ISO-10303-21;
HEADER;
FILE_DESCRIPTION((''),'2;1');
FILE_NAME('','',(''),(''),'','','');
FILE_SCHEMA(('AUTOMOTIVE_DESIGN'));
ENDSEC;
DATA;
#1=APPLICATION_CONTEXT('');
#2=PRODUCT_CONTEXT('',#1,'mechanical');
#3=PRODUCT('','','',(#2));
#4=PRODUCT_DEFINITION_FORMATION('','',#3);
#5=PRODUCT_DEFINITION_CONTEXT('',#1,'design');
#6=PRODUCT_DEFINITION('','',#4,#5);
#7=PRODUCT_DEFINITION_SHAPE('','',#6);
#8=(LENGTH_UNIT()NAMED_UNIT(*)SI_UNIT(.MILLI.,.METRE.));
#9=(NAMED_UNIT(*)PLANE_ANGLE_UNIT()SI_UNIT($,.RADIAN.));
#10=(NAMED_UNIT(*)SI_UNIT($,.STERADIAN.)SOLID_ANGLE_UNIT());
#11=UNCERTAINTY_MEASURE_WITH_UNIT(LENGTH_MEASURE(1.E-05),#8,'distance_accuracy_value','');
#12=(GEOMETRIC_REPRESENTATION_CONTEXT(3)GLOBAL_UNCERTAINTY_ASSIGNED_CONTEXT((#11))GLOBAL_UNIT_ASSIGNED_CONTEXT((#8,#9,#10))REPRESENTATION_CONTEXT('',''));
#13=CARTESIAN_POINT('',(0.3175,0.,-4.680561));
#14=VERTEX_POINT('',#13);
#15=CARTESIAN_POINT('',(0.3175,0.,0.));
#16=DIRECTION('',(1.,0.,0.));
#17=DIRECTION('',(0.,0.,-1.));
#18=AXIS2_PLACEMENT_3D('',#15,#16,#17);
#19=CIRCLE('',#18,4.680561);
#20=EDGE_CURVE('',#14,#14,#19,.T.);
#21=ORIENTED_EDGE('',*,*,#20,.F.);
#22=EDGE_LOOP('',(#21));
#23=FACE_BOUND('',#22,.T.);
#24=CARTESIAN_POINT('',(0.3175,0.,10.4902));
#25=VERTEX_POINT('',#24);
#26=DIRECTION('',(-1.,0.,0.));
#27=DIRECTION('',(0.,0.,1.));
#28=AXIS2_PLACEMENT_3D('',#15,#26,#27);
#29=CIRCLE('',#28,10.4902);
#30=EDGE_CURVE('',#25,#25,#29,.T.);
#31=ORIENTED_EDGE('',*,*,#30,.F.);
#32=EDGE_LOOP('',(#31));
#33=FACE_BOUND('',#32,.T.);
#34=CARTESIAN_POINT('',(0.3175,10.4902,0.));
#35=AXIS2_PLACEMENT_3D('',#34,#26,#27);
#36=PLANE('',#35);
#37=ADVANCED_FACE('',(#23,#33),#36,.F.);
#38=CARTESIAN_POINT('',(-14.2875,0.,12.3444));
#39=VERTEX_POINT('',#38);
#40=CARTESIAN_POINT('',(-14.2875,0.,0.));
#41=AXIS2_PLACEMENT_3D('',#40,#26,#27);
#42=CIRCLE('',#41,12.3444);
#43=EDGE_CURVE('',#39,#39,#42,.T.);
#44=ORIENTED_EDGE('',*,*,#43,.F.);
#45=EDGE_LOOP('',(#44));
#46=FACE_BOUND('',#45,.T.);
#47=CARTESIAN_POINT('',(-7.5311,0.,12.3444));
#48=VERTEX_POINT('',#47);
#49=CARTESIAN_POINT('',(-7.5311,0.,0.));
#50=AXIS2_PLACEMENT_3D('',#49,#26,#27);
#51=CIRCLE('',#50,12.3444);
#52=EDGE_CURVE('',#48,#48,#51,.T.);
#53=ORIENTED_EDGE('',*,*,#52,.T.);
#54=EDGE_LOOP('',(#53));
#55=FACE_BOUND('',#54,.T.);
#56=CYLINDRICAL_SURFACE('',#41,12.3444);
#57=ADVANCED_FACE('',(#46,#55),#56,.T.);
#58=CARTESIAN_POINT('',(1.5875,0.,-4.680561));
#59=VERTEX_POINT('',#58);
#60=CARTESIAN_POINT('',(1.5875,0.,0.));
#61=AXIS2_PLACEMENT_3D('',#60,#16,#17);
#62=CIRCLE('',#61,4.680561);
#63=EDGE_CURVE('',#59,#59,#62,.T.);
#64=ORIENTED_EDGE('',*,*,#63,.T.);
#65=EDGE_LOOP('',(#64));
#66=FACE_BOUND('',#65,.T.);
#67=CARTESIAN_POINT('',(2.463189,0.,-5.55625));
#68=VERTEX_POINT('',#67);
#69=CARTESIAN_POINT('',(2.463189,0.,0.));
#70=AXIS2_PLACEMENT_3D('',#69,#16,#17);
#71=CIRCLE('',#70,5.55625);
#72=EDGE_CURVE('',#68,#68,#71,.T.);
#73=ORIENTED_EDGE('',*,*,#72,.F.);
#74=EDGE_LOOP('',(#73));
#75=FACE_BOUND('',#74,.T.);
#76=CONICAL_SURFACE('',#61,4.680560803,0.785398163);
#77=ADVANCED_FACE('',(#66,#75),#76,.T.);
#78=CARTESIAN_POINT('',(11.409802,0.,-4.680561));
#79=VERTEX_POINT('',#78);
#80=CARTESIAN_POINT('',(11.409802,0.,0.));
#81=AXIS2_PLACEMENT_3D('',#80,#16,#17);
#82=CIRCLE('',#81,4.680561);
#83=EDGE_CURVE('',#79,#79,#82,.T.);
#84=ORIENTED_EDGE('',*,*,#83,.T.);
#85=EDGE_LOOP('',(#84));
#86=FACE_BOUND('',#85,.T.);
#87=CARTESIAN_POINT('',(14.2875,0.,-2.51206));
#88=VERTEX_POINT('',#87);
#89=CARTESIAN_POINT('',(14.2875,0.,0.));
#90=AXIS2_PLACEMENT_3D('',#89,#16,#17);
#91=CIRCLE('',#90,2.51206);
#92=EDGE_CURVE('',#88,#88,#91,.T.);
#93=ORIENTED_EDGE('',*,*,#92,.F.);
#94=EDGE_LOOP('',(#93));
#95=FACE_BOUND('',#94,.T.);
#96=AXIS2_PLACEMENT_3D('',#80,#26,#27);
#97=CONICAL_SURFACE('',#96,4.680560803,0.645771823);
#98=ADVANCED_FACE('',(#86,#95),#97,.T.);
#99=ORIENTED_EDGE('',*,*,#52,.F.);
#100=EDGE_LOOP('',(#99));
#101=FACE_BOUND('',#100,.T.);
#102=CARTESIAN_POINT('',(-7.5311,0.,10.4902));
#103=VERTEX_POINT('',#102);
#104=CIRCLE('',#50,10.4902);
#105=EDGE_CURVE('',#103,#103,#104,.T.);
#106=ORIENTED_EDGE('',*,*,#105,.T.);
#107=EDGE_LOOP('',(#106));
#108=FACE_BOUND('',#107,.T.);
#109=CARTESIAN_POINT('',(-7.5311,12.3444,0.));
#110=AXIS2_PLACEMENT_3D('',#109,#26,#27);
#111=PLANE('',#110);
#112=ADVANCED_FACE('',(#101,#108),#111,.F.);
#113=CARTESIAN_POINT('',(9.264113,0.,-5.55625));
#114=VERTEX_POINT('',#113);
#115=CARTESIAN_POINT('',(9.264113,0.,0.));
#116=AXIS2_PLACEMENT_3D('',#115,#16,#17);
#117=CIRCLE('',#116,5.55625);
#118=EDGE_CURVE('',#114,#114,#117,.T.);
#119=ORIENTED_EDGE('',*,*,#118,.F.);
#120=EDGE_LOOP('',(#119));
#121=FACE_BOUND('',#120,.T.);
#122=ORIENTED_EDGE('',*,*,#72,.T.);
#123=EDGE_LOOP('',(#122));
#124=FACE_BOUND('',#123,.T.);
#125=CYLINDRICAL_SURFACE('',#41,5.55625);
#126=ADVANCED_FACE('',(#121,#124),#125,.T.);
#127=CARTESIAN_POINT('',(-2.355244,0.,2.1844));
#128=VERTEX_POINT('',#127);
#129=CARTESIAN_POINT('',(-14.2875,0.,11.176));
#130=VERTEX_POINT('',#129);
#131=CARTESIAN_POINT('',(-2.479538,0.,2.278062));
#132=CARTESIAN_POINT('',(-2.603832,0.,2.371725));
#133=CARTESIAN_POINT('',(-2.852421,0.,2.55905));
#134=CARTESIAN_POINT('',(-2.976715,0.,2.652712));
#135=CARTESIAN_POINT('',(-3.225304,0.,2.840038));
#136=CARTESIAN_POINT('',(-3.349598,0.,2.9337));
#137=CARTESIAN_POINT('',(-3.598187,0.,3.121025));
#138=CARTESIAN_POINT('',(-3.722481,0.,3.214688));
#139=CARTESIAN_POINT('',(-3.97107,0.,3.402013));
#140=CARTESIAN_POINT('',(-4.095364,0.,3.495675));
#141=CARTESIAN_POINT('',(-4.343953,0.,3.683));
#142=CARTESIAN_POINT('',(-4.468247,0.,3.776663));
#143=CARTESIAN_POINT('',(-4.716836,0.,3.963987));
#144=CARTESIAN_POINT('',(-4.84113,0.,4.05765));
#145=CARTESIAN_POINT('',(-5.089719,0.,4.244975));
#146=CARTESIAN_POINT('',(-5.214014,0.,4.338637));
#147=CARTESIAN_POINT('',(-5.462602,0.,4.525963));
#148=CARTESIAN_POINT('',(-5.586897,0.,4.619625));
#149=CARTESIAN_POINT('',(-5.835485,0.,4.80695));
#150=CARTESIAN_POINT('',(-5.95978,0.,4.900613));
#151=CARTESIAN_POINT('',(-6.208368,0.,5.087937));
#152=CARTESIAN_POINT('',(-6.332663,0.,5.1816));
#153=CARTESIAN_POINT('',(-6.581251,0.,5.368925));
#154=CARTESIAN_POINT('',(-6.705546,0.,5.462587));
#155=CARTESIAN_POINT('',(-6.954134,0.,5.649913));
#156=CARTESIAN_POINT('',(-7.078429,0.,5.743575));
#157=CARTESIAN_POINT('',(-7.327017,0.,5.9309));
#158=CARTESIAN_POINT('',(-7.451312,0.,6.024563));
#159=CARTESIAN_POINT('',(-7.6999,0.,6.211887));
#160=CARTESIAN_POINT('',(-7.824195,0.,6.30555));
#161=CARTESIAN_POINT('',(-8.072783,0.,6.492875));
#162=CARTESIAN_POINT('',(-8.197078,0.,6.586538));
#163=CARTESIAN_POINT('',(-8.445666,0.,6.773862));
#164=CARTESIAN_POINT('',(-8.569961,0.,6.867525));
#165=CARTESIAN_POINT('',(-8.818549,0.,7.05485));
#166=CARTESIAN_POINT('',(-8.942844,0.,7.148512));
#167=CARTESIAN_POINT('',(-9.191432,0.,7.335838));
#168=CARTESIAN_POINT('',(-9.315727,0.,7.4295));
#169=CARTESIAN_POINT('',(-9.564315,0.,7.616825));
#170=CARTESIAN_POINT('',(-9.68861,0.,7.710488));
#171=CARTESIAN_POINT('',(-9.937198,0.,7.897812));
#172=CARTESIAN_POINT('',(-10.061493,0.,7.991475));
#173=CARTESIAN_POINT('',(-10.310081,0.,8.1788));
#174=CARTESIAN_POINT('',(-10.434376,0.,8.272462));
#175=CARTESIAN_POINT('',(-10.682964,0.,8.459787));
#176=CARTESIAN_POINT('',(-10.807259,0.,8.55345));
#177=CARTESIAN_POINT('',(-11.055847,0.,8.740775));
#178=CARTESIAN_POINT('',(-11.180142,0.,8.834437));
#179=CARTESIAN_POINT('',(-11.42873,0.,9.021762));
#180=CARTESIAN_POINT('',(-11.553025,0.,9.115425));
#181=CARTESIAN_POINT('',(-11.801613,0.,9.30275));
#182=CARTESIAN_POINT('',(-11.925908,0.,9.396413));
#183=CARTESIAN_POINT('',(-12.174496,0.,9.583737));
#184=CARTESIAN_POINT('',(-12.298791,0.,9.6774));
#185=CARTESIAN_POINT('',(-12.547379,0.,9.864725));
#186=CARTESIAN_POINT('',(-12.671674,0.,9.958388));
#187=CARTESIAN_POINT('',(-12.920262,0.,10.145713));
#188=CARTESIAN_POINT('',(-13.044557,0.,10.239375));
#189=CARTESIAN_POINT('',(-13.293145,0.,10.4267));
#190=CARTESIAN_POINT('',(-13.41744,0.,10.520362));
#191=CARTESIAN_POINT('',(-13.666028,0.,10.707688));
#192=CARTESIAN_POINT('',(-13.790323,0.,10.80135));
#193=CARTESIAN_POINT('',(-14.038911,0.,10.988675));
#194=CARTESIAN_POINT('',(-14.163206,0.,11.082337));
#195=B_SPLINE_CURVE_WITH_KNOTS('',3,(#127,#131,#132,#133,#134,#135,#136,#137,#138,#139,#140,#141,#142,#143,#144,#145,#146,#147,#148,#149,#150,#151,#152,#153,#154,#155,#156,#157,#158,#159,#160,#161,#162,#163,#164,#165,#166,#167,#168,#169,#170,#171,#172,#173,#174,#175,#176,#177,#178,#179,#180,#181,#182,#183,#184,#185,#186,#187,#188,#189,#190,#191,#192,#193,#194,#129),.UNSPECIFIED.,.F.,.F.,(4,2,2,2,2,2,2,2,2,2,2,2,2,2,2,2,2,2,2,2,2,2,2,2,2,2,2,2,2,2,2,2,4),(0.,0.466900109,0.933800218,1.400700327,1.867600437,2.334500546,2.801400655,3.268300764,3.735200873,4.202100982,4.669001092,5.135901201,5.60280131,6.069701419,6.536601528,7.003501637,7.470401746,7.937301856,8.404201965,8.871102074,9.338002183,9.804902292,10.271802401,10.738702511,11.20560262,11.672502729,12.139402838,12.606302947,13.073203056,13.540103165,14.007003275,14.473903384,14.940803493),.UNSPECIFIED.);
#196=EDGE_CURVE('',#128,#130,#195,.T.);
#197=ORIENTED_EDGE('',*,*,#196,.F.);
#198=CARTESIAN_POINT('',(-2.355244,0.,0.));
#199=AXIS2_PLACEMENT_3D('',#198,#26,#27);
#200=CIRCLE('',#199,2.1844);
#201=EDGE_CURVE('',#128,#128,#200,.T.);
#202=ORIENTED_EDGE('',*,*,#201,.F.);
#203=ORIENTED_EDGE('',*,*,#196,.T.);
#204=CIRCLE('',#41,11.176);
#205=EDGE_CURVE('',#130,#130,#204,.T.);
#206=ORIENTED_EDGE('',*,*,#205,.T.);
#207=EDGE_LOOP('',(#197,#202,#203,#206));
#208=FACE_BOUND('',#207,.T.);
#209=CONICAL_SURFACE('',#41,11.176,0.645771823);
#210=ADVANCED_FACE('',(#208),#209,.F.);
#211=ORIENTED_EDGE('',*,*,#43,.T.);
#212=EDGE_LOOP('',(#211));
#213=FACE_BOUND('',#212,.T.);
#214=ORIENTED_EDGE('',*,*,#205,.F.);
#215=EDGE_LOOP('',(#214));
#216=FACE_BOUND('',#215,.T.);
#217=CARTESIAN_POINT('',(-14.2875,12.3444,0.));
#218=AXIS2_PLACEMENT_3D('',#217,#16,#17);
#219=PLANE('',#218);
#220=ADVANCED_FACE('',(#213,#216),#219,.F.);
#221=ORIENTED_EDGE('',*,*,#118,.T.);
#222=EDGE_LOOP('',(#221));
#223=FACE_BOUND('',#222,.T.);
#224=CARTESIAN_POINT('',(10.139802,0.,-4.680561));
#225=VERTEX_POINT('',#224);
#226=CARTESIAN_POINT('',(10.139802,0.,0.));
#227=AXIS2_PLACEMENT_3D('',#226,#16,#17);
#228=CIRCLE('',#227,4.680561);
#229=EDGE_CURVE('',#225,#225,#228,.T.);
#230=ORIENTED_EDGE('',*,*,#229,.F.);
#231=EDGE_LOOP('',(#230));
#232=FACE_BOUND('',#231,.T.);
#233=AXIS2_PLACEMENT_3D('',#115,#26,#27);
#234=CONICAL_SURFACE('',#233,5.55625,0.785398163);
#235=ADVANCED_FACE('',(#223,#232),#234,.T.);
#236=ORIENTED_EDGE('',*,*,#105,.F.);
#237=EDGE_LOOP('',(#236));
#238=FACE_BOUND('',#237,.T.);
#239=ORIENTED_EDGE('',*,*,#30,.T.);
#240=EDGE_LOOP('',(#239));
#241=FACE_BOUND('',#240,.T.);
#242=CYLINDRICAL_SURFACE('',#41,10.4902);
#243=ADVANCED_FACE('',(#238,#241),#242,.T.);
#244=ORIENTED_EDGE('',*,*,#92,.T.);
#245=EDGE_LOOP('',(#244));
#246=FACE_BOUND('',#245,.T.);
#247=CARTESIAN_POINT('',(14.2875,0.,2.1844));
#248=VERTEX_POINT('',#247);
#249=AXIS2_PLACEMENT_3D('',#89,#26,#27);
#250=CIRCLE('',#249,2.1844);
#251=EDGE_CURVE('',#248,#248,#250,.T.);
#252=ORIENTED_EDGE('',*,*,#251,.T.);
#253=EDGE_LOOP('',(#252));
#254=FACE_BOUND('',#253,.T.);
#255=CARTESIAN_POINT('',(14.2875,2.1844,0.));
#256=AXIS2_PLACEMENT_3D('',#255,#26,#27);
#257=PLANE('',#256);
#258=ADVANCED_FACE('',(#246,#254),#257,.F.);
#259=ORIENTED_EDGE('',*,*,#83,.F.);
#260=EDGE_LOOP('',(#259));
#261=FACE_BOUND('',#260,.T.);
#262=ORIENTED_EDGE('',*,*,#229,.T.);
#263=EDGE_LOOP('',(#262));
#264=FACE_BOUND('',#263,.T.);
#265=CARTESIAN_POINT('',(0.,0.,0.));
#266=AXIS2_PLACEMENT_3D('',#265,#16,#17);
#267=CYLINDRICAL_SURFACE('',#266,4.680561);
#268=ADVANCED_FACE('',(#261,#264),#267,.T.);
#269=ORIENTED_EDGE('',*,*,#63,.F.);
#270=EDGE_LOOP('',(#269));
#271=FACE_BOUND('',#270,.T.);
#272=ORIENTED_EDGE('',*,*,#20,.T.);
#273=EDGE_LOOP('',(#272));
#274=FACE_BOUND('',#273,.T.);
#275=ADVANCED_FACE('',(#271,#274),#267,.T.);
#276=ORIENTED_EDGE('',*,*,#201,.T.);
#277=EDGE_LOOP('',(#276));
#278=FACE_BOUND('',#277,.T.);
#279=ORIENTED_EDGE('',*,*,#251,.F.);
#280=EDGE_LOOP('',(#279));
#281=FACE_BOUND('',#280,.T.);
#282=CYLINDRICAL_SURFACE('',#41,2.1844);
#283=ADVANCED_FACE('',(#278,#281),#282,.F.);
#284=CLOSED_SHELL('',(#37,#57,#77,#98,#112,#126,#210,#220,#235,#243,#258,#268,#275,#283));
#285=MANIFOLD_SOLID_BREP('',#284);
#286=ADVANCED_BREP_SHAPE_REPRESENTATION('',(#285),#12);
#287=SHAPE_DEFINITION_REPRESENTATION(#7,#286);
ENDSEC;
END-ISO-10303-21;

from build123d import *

# Parameters (mm, degrees)
CUT_SWEEP1_PITCH = 1.27


with BuildPart() as part:
    # Sketch1 → Revolve1 (revolve)
    with BuildSketch(Plane.XY, mode=Mode.PRIVATE) as revolve1_sk:
        Polygon((-14.2875, 12.3444), (-14.2875, 11.176), (-2.355243782, 2.1844), (14.2875, 2.1844), (14.2875, 2.51206), (14.2875, 5.55625), (10.247723424, 5.55625), (0.3175, 5.55625), (0.3175, 10.4902), (-7.5311, 10.4902), (-7.5311, 12.3444), align=None)
    revolve(revolve1_sk.sketch.rotate(Axis((-14.2875, 0, 0), (1, 0, 0)), 90), axis=Axis((-14.2875, 0, 0), (1, 0, 0)))

    # Cut-Sweep1: the profile of Sketch4 profile screwed along a right-hand helix of 11 turns, 8 arcs to a turn; built about Z, then put on its axis
    cut_sweep1_z = Axis((0, 0, 0), (0, 0, 1))
    cut_sweep1_corners = [(5.55655, 0, 0.000173205), (5.55655, 0, -1.111423205), (4.731360803, 0, -0.635), (4.731360803, 0, -0.47625)]
    with BuildLine(mode=Mode.PRIVATE) as cut_sweep1_profile:
        Line(cut_sweep1_corners[0], cut_sweep1_corners[1])
        Line(cut_sweep1_corners[1], cut_sweep1_corners[2])
        Line(cut_sweep1_corners[2], cut_sweep1_corners[3])
        Line(cut_sweep1_corners[3], cut_sweep1_corners[0])
    cut_sweep1_cap = Face(cut_sweep1_profile.wire())
    cut_sweep1_turn_angles = [0, 22.5, 45, 67.5, 90, 112.5, 135, 157.5, 180, 202.5, 225, 247.5, 270, 292.5, 315, 337.5, 360]
    cut_sweep1_turn_weights = [1, 0.9238795325112867, 1, 0.9238795325112867, 1, 0.9238795325112867, 1, 0.9238795325112867, 1, 0.9238795325112867, 1, 0.9238795325112867, 1, 0.9238795325112867, 1, 0.9238795325112867, 1]
    cut_sweep1_turn_rails = [Edge.make_bspline([Vector(p[0], p[1], 0).rotate(cut_sweep1_z, cut_sweep1_turn_angles[k]) / cut_sweep1_turn_weights[k] + Vector(0, 0, p[2] + CUT_SWEEP1_PITCH * cut_sweep1_turn_angles[k] / 360) for k in range(17)], [0, 0, 0, 1, 1, 2, 2, 3, 3, 4, 4, 5, 5, 6, 6, 7, 7, 8, 8, 8], 2, cut_sweep1_turn_weights) for p in cut_sweep1_corners]
    cut_sweep1_turn_sides = [Face.make_surface_from_curves(cut_sweep1_turn_rails[p[0]], cut_sweep1_turn_rails[p[1]]) for p in [(0, 1), (1, 2), (2, 3), (3, 0)]]
    cut_sweep1_turn = Solid(Shell([*cut_sweep1_turn_sides, cut_sweep1_cap, cut_sweep1_cap.rotate(cut_sweep1_z, 360).moved(Location((0, 0, CUT_SWEEP1_PITCH * 360 / 360)))]))
    cut_sweep1_each = [*[cut_sweep1_turn.moved(Location((0, 0, CUT_SWEEP1_PITCH * i))) for i in range(11)]]
    add(Plane(origin=(14.2875, 0, 0), x_dir=(0, 1, 0), z_dir=(-1, 0, 0)) * Compound([cut_sweep1_each[i] for i in range(0, 11, 2)]), mode=Mode.SUBTRACT)
    add(Plane(origin=(14.2875, 0, 0), x_dir=(0, 1, 0), z_dir=(-1, 0, 0)) * Compound([cut_sweep1_each[i] for i in range(1, 11, 2)]), mode=Mode.SUBTRACT)

    # Sketch5 → Cut-Revolve1 (revolve, cut)
    with BuildSketch(Plane.XY, mode=Mode.PRIVATE) as cut_revolve1_sk:
        Polygon((14.2875, 2.51206), (11.409802239, 4.680560803), (10.139802239, 4.680560803), (9.264113042, 5.55625), (14.2875, 5.55625), align=None)
        Polygon((0.3175, 5.55625), (0.3175, 4.680560803), (1.5875, 4.680560803), (2.463189197, 5.55625), align=None)
    revolve(cut_revolve1_sk.sketch.rotate(Axis((0, 0, 0), (-1, 0, 0)), 90), axis=Axis((0, 0, 0), (-1, 0, 0)), mode=Mode.SUBTRACT)

    # Sketch6 → Revolve2 (revolve)
    with BuildSketch(Plane.XY, mode=Mode.PRIVATE) as revolve2_sk:
        Polygon((2.463189197, 5.55625), (1.5875, 4.680560803), (10.139802239, 4.680560803), (9.264113042, 5.55625), align=None)
    revolve(revolve2_sk.sketch.rotate(Axis((0, 0, 0), (1, 0, 0)), 270), axis=Axis((0, 0, 0), (1, 0, 0)))


solid = part.part
